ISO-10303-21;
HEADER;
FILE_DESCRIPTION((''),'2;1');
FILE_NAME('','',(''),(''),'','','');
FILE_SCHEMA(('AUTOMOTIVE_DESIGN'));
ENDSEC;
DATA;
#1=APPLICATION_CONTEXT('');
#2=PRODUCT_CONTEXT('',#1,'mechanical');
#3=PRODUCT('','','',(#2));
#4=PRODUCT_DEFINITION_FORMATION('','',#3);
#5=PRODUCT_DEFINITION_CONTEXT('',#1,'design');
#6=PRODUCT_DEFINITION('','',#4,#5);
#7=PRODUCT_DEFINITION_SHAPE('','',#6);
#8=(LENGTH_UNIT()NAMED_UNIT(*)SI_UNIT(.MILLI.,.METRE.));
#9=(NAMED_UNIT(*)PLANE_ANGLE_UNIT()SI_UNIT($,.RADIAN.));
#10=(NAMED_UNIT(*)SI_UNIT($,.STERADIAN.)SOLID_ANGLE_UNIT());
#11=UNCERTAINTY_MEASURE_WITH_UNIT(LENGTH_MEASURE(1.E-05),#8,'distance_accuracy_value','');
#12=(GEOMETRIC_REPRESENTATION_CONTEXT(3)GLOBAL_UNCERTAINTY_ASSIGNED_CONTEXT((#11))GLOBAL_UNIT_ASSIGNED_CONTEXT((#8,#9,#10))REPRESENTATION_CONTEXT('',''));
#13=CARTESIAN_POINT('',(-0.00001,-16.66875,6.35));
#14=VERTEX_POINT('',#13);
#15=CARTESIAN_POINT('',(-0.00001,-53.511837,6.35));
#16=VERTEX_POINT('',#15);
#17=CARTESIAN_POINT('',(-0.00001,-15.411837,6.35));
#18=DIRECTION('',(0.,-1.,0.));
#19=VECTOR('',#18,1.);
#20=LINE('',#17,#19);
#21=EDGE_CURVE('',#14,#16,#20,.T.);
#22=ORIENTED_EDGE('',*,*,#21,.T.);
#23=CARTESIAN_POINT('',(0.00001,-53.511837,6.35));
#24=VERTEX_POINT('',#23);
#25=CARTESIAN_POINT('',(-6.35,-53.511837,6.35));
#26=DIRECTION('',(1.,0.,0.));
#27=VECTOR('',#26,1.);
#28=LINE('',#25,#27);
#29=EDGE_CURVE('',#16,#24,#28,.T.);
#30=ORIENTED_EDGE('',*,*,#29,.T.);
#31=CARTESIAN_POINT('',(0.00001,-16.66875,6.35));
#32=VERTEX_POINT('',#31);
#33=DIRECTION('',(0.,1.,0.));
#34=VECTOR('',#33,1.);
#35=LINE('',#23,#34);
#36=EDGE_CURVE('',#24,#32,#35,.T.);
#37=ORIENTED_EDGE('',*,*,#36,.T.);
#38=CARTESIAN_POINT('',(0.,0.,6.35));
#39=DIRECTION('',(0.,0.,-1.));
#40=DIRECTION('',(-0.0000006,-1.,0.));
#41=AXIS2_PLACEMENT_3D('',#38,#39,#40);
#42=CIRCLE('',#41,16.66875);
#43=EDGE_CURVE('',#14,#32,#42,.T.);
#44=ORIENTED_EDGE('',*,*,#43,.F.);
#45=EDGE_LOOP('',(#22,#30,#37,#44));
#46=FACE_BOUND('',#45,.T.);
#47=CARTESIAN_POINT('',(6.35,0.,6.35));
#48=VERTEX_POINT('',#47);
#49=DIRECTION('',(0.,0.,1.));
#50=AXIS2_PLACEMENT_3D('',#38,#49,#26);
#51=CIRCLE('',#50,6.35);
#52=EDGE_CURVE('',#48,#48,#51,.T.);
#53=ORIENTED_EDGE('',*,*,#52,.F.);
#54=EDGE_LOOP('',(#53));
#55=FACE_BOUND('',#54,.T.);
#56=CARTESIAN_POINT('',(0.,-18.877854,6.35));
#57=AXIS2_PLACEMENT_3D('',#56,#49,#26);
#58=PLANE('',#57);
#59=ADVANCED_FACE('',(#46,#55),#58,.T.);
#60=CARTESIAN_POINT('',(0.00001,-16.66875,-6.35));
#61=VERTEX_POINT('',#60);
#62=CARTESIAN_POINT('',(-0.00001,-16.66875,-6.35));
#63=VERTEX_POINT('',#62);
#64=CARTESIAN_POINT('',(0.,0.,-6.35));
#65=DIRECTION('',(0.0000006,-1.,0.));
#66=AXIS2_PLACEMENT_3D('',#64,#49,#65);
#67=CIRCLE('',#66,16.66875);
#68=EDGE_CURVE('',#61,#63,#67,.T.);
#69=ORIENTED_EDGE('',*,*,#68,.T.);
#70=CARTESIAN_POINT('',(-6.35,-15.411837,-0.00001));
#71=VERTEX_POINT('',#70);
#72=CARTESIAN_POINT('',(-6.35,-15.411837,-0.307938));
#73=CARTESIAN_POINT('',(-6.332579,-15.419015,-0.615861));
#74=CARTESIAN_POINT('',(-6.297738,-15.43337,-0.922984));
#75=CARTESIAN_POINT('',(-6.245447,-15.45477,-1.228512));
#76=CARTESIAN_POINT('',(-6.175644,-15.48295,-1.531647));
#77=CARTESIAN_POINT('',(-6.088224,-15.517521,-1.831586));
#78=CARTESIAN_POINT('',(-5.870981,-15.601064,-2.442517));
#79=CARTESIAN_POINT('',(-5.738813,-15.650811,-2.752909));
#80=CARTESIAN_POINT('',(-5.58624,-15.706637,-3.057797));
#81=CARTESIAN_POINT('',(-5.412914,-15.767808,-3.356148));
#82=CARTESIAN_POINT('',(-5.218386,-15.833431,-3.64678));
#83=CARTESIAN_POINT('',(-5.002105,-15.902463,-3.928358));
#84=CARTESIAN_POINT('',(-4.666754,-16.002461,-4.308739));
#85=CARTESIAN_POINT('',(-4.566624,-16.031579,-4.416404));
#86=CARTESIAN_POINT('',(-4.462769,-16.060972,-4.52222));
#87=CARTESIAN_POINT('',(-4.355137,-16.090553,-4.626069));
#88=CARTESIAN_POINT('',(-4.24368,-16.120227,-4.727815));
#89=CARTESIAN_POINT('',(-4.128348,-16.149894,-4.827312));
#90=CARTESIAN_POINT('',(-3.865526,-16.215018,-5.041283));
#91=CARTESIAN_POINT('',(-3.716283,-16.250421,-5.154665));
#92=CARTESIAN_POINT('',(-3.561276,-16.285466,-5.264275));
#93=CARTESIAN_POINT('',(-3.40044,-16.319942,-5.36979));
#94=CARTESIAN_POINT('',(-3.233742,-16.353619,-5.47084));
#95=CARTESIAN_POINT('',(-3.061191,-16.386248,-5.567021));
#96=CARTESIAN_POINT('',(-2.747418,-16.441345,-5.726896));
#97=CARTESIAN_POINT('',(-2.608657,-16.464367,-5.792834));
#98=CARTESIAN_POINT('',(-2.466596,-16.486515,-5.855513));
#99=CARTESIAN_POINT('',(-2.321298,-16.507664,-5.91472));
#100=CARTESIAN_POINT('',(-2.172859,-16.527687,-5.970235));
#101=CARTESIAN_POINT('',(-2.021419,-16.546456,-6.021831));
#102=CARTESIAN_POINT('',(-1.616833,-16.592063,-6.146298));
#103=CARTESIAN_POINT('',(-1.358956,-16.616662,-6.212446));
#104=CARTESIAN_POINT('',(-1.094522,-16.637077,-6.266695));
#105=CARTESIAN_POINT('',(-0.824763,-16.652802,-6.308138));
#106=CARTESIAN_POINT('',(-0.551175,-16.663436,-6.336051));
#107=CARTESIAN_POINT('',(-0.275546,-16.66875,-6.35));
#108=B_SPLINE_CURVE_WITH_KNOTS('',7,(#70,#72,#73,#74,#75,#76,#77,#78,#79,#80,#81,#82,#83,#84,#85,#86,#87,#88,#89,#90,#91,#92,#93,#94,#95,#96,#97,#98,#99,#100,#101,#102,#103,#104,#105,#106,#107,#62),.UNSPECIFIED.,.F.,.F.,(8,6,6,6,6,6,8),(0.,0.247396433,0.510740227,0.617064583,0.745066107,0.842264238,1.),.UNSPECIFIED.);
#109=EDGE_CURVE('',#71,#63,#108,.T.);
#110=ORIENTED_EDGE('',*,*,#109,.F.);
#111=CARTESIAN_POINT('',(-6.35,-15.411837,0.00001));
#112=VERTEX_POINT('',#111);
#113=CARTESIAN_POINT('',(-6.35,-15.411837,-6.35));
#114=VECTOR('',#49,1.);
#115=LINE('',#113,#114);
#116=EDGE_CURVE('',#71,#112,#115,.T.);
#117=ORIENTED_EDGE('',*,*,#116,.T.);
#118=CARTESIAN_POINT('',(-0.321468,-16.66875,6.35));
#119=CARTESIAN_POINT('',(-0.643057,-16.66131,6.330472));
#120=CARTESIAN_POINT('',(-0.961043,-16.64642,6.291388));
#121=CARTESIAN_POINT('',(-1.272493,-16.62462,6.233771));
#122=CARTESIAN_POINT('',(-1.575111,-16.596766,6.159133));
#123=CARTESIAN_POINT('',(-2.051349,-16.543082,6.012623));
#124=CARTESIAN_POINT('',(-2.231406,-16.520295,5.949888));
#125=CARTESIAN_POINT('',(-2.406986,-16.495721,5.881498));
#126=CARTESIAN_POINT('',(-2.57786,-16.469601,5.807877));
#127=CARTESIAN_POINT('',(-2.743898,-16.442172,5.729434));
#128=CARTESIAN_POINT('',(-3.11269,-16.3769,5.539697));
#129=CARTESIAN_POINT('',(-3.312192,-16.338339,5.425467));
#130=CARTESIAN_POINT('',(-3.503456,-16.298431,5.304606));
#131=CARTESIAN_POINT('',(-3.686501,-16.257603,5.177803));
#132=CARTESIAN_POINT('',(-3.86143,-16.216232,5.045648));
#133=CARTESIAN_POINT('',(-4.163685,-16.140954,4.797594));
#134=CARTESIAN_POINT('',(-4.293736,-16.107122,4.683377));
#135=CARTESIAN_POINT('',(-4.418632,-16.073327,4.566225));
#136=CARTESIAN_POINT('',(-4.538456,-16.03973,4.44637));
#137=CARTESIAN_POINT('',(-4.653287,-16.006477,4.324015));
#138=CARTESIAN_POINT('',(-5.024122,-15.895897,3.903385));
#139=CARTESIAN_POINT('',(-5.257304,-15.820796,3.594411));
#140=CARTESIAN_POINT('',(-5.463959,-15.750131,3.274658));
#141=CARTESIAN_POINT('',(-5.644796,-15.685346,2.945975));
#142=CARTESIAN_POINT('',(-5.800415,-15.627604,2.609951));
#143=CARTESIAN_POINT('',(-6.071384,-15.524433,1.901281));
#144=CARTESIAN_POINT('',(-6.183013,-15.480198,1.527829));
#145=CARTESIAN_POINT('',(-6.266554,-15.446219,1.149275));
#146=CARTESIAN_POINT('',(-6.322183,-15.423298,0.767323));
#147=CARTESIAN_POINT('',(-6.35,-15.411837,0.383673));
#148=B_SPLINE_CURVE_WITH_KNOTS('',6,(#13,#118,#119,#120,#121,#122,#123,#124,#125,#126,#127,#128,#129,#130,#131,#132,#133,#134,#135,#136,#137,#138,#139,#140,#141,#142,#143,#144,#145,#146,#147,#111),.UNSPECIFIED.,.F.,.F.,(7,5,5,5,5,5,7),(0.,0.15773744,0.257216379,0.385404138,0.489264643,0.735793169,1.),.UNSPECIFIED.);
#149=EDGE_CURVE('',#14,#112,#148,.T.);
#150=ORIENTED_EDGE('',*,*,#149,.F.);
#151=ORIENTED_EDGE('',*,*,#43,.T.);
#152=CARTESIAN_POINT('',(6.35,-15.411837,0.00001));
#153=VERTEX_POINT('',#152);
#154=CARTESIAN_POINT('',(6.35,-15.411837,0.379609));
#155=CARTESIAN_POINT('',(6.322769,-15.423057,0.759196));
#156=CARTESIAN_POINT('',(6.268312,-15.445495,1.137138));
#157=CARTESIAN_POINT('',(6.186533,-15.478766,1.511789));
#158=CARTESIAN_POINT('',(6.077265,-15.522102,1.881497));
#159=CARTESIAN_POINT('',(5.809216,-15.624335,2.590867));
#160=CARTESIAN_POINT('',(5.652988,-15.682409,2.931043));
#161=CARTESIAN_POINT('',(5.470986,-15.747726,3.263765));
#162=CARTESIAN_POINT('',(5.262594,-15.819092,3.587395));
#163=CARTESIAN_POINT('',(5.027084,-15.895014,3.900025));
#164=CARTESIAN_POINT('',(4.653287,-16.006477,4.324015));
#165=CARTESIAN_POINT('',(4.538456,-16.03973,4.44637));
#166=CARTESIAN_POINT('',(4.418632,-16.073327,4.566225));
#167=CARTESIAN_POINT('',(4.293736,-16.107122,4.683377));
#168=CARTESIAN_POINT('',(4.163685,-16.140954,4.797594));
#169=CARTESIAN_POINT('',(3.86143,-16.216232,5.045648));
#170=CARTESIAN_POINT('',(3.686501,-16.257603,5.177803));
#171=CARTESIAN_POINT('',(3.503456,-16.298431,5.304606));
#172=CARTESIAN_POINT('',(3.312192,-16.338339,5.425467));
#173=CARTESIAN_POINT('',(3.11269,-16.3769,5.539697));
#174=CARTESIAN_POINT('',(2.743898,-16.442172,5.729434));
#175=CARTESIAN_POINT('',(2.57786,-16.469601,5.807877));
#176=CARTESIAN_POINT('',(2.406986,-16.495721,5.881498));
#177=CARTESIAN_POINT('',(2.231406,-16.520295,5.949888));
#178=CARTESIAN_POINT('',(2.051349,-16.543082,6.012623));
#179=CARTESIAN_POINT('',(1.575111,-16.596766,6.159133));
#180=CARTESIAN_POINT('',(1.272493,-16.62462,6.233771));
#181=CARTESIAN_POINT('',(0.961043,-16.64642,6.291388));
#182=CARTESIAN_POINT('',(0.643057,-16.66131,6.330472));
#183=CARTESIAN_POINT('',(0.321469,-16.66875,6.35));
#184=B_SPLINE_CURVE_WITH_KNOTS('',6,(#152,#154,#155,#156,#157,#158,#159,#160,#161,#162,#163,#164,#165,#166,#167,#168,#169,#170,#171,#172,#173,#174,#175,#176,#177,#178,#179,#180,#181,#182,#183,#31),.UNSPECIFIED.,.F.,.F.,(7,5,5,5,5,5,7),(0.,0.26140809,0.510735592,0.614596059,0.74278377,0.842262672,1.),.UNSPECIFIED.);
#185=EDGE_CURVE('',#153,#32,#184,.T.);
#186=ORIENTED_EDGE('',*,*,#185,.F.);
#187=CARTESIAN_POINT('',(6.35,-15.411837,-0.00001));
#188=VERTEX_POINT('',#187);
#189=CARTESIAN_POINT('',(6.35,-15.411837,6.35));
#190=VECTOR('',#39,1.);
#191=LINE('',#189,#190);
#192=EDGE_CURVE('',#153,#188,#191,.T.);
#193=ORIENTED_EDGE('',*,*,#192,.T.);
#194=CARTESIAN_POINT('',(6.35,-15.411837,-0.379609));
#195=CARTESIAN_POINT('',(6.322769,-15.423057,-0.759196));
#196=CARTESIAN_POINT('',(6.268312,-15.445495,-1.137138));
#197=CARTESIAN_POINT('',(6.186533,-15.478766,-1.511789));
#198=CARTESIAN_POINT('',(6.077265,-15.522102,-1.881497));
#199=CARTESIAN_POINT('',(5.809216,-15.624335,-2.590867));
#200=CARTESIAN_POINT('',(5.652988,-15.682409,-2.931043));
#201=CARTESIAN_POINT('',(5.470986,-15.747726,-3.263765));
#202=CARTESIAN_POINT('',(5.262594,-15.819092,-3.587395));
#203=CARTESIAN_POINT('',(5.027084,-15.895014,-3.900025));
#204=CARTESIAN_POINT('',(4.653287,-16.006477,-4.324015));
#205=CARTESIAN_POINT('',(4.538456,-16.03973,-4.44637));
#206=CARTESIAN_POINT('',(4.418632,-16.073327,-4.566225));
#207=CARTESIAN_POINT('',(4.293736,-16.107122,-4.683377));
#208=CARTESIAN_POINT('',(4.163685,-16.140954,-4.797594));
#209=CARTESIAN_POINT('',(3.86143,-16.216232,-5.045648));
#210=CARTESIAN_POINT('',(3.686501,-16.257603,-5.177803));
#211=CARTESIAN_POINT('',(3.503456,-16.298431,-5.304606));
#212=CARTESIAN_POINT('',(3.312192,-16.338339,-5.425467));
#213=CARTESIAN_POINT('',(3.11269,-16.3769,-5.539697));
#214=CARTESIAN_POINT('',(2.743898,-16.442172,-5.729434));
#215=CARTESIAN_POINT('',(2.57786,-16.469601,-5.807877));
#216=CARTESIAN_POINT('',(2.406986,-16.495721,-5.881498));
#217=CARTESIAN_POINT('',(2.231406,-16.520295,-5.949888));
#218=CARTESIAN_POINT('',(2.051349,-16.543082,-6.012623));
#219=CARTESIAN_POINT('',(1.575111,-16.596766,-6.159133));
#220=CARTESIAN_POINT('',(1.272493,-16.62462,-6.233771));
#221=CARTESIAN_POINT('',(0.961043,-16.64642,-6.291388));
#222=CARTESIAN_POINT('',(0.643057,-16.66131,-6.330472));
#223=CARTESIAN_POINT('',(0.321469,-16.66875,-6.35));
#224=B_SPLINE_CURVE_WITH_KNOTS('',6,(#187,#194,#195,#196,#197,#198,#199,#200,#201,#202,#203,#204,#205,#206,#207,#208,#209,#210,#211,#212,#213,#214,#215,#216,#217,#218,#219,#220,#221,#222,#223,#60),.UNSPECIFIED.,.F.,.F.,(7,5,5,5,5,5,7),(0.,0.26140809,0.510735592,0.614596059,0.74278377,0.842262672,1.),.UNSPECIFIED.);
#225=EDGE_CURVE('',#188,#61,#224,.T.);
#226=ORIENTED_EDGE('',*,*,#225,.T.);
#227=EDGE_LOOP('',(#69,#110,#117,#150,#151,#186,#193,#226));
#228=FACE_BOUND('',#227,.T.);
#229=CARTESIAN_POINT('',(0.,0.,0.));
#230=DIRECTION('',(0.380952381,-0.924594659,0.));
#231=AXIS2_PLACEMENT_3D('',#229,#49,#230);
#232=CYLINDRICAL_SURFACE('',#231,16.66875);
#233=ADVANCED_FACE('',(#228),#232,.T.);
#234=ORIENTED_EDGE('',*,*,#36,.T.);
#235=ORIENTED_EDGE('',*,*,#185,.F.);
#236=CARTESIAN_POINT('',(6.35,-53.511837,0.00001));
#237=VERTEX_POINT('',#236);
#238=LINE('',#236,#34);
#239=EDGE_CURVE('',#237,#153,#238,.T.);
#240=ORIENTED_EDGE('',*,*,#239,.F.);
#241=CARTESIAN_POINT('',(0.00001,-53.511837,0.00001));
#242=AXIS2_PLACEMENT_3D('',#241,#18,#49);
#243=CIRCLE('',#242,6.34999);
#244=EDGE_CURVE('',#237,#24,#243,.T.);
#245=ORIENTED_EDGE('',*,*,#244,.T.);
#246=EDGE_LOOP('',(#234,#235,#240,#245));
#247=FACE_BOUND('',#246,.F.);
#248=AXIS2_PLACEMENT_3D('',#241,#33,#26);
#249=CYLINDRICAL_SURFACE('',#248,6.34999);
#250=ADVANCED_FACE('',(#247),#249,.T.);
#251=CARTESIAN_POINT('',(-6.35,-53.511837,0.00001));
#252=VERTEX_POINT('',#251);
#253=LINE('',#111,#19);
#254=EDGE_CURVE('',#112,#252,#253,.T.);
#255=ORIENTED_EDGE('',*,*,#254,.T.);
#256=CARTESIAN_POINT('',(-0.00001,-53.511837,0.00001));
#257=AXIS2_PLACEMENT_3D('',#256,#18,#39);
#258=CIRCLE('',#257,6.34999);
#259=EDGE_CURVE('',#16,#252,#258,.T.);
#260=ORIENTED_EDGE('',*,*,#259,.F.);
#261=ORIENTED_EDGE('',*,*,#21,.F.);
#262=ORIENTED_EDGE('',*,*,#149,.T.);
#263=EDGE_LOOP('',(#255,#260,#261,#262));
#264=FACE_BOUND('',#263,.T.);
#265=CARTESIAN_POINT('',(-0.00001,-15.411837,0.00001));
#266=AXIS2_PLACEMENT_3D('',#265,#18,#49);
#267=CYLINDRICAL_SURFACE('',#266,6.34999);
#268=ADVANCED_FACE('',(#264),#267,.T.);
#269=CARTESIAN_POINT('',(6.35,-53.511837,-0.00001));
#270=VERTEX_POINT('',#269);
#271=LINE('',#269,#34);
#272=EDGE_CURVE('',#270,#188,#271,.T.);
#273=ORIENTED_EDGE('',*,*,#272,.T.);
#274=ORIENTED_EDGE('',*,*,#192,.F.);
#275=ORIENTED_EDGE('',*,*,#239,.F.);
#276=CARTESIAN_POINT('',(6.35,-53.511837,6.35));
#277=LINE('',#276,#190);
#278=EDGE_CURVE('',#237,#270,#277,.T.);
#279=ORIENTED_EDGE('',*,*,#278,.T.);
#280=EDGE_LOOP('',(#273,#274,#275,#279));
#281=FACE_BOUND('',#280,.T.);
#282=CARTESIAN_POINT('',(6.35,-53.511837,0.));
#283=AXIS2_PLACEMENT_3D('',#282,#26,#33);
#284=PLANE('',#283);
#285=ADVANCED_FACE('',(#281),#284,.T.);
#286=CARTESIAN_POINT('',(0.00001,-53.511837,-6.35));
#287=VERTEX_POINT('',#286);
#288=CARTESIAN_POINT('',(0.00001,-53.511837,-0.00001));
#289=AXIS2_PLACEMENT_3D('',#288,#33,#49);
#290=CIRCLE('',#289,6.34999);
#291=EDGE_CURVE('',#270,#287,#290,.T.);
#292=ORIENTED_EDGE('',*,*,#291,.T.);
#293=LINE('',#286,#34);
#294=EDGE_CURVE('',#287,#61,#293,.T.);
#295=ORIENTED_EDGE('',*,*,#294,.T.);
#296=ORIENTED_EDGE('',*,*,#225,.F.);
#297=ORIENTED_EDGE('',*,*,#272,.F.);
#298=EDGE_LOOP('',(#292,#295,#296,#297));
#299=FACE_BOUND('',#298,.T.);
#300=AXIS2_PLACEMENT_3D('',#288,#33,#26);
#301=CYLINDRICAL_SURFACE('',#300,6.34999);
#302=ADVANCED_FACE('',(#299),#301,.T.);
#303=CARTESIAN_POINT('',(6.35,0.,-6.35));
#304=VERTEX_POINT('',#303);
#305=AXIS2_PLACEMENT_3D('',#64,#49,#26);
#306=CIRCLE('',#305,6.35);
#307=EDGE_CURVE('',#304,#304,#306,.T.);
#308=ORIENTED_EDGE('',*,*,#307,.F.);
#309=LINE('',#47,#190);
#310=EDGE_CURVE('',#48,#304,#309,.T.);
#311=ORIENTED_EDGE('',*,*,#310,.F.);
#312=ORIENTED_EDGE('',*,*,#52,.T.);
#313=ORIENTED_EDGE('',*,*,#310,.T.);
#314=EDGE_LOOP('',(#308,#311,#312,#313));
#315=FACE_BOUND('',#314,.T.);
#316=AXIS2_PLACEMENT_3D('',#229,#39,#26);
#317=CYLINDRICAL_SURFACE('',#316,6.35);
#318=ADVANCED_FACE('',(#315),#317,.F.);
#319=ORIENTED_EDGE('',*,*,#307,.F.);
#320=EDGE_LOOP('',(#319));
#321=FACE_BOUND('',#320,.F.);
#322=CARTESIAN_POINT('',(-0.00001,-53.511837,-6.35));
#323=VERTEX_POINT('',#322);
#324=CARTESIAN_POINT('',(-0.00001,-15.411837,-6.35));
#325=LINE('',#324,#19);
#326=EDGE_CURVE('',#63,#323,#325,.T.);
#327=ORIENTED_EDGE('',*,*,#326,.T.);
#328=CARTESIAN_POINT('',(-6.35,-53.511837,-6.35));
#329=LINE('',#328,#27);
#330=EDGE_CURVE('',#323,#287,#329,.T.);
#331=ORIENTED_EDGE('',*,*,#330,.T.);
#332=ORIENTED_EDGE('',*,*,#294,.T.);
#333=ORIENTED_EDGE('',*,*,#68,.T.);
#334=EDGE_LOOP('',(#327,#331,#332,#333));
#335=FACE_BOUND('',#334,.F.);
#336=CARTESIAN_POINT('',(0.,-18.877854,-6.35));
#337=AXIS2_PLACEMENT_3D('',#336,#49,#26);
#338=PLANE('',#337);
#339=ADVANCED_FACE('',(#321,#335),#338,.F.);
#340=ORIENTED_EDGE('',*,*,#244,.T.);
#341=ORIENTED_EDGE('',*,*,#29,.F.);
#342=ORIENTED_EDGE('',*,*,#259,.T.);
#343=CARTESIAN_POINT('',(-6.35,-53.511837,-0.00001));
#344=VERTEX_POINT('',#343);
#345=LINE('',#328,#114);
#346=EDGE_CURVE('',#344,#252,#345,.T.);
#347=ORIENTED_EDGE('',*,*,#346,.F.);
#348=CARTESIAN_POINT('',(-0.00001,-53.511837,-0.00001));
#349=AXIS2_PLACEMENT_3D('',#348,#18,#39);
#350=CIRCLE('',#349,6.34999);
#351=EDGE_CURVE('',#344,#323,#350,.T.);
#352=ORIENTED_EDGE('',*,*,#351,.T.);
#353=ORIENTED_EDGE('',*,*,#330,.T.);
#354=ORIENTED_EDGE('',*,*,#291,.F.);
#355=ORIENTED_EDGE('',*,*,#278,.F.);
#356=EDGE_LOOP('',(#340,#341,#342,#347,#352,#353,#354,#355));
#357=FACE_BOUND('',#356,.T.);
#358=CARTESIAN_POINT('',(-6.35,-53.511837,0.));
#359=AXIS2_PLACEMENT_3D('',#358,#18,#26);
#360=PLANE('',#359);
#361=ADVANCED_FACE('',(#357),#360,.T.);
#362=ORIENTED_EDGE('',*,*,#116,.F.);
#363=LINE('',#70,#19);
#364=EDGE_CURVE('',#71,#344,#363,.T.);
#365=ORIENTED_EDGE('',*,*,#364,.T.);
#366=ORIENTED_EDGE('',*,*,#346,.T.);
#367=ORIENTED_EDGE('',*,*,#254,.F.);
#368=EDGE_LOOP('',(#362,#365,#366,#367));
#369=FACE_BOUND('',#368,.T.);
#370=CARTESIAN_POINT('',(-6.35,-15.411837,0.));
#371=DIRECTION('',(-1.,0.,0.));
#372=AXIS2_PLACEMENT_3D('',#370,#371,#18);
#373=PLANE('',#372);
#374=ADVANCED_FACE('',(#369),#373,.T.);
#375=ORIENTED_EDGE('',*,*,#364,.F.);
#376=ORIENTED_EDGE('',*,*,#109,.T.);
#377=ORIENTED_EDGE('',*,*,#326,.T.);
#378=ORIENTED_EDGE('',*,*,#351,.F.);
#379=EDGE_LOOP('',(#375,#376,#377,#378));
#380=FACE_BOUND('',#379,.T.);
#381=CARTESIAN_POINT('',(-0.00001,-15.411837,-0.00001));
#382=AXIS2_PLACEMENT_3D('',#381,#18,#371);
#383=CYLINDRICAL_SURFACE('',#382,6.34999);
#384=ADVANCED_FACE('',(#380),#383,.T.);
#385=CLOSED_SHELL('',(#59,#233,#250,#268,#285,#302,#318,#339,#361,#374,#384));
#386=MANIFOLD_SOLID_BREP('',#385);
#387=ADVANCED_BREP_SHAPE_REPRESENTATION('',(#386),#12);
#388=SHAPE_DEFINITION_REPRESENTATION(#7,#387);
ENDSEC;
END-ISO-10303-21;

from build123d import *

# Parameters (mm, degrees)
F0_R     = 6.35
F1_DEPTH = 6.35
F2_R     = 6.34999


# Not quite as in the source:
# - a fillet or chamfer is up to 0.001 mm smaller than in the source, because OpenCascade refuses the exact size


with BuildPart() as f1:
    # F0 (on Top) → F1 (new body, symmetric)
    with BuildSketch(Plane.XY):
        with BuildLine():
            ThreePointArc((6.35, -15.4118372222), (0, 16.66875), (-6.35, -15.4118372222))
            Line((-6.35, -15.4118372222), (-6.35, -53.5118372222))
            Line((-6.35, -53.5118372222), (6.35, -53.5118372222))
            Line((6.35, -53.5118372222), (6.35, -15.4118372222))
        make_face()
        Circle(F0_R, mode=Mode.SUBTRACT)
    extrude(amount=F1_DEPTH, both=True)

    # F2 (radius 6.35 in the source; OpenCascade refuses exactly that, so slightly less here)
    f2_edges = [f1.edges().sort_by_distance(p)[0] for p in [
        (-6.35, -34.461837, -6.35),
        (6.35, -34.461837, -6.35),
        (-6.35, -34.461837, 6.35),
        (6.35, -34.461837, 6.35),
    ]]
    fillet(f2_edges, radius=F2_R)


solid = f1.part
